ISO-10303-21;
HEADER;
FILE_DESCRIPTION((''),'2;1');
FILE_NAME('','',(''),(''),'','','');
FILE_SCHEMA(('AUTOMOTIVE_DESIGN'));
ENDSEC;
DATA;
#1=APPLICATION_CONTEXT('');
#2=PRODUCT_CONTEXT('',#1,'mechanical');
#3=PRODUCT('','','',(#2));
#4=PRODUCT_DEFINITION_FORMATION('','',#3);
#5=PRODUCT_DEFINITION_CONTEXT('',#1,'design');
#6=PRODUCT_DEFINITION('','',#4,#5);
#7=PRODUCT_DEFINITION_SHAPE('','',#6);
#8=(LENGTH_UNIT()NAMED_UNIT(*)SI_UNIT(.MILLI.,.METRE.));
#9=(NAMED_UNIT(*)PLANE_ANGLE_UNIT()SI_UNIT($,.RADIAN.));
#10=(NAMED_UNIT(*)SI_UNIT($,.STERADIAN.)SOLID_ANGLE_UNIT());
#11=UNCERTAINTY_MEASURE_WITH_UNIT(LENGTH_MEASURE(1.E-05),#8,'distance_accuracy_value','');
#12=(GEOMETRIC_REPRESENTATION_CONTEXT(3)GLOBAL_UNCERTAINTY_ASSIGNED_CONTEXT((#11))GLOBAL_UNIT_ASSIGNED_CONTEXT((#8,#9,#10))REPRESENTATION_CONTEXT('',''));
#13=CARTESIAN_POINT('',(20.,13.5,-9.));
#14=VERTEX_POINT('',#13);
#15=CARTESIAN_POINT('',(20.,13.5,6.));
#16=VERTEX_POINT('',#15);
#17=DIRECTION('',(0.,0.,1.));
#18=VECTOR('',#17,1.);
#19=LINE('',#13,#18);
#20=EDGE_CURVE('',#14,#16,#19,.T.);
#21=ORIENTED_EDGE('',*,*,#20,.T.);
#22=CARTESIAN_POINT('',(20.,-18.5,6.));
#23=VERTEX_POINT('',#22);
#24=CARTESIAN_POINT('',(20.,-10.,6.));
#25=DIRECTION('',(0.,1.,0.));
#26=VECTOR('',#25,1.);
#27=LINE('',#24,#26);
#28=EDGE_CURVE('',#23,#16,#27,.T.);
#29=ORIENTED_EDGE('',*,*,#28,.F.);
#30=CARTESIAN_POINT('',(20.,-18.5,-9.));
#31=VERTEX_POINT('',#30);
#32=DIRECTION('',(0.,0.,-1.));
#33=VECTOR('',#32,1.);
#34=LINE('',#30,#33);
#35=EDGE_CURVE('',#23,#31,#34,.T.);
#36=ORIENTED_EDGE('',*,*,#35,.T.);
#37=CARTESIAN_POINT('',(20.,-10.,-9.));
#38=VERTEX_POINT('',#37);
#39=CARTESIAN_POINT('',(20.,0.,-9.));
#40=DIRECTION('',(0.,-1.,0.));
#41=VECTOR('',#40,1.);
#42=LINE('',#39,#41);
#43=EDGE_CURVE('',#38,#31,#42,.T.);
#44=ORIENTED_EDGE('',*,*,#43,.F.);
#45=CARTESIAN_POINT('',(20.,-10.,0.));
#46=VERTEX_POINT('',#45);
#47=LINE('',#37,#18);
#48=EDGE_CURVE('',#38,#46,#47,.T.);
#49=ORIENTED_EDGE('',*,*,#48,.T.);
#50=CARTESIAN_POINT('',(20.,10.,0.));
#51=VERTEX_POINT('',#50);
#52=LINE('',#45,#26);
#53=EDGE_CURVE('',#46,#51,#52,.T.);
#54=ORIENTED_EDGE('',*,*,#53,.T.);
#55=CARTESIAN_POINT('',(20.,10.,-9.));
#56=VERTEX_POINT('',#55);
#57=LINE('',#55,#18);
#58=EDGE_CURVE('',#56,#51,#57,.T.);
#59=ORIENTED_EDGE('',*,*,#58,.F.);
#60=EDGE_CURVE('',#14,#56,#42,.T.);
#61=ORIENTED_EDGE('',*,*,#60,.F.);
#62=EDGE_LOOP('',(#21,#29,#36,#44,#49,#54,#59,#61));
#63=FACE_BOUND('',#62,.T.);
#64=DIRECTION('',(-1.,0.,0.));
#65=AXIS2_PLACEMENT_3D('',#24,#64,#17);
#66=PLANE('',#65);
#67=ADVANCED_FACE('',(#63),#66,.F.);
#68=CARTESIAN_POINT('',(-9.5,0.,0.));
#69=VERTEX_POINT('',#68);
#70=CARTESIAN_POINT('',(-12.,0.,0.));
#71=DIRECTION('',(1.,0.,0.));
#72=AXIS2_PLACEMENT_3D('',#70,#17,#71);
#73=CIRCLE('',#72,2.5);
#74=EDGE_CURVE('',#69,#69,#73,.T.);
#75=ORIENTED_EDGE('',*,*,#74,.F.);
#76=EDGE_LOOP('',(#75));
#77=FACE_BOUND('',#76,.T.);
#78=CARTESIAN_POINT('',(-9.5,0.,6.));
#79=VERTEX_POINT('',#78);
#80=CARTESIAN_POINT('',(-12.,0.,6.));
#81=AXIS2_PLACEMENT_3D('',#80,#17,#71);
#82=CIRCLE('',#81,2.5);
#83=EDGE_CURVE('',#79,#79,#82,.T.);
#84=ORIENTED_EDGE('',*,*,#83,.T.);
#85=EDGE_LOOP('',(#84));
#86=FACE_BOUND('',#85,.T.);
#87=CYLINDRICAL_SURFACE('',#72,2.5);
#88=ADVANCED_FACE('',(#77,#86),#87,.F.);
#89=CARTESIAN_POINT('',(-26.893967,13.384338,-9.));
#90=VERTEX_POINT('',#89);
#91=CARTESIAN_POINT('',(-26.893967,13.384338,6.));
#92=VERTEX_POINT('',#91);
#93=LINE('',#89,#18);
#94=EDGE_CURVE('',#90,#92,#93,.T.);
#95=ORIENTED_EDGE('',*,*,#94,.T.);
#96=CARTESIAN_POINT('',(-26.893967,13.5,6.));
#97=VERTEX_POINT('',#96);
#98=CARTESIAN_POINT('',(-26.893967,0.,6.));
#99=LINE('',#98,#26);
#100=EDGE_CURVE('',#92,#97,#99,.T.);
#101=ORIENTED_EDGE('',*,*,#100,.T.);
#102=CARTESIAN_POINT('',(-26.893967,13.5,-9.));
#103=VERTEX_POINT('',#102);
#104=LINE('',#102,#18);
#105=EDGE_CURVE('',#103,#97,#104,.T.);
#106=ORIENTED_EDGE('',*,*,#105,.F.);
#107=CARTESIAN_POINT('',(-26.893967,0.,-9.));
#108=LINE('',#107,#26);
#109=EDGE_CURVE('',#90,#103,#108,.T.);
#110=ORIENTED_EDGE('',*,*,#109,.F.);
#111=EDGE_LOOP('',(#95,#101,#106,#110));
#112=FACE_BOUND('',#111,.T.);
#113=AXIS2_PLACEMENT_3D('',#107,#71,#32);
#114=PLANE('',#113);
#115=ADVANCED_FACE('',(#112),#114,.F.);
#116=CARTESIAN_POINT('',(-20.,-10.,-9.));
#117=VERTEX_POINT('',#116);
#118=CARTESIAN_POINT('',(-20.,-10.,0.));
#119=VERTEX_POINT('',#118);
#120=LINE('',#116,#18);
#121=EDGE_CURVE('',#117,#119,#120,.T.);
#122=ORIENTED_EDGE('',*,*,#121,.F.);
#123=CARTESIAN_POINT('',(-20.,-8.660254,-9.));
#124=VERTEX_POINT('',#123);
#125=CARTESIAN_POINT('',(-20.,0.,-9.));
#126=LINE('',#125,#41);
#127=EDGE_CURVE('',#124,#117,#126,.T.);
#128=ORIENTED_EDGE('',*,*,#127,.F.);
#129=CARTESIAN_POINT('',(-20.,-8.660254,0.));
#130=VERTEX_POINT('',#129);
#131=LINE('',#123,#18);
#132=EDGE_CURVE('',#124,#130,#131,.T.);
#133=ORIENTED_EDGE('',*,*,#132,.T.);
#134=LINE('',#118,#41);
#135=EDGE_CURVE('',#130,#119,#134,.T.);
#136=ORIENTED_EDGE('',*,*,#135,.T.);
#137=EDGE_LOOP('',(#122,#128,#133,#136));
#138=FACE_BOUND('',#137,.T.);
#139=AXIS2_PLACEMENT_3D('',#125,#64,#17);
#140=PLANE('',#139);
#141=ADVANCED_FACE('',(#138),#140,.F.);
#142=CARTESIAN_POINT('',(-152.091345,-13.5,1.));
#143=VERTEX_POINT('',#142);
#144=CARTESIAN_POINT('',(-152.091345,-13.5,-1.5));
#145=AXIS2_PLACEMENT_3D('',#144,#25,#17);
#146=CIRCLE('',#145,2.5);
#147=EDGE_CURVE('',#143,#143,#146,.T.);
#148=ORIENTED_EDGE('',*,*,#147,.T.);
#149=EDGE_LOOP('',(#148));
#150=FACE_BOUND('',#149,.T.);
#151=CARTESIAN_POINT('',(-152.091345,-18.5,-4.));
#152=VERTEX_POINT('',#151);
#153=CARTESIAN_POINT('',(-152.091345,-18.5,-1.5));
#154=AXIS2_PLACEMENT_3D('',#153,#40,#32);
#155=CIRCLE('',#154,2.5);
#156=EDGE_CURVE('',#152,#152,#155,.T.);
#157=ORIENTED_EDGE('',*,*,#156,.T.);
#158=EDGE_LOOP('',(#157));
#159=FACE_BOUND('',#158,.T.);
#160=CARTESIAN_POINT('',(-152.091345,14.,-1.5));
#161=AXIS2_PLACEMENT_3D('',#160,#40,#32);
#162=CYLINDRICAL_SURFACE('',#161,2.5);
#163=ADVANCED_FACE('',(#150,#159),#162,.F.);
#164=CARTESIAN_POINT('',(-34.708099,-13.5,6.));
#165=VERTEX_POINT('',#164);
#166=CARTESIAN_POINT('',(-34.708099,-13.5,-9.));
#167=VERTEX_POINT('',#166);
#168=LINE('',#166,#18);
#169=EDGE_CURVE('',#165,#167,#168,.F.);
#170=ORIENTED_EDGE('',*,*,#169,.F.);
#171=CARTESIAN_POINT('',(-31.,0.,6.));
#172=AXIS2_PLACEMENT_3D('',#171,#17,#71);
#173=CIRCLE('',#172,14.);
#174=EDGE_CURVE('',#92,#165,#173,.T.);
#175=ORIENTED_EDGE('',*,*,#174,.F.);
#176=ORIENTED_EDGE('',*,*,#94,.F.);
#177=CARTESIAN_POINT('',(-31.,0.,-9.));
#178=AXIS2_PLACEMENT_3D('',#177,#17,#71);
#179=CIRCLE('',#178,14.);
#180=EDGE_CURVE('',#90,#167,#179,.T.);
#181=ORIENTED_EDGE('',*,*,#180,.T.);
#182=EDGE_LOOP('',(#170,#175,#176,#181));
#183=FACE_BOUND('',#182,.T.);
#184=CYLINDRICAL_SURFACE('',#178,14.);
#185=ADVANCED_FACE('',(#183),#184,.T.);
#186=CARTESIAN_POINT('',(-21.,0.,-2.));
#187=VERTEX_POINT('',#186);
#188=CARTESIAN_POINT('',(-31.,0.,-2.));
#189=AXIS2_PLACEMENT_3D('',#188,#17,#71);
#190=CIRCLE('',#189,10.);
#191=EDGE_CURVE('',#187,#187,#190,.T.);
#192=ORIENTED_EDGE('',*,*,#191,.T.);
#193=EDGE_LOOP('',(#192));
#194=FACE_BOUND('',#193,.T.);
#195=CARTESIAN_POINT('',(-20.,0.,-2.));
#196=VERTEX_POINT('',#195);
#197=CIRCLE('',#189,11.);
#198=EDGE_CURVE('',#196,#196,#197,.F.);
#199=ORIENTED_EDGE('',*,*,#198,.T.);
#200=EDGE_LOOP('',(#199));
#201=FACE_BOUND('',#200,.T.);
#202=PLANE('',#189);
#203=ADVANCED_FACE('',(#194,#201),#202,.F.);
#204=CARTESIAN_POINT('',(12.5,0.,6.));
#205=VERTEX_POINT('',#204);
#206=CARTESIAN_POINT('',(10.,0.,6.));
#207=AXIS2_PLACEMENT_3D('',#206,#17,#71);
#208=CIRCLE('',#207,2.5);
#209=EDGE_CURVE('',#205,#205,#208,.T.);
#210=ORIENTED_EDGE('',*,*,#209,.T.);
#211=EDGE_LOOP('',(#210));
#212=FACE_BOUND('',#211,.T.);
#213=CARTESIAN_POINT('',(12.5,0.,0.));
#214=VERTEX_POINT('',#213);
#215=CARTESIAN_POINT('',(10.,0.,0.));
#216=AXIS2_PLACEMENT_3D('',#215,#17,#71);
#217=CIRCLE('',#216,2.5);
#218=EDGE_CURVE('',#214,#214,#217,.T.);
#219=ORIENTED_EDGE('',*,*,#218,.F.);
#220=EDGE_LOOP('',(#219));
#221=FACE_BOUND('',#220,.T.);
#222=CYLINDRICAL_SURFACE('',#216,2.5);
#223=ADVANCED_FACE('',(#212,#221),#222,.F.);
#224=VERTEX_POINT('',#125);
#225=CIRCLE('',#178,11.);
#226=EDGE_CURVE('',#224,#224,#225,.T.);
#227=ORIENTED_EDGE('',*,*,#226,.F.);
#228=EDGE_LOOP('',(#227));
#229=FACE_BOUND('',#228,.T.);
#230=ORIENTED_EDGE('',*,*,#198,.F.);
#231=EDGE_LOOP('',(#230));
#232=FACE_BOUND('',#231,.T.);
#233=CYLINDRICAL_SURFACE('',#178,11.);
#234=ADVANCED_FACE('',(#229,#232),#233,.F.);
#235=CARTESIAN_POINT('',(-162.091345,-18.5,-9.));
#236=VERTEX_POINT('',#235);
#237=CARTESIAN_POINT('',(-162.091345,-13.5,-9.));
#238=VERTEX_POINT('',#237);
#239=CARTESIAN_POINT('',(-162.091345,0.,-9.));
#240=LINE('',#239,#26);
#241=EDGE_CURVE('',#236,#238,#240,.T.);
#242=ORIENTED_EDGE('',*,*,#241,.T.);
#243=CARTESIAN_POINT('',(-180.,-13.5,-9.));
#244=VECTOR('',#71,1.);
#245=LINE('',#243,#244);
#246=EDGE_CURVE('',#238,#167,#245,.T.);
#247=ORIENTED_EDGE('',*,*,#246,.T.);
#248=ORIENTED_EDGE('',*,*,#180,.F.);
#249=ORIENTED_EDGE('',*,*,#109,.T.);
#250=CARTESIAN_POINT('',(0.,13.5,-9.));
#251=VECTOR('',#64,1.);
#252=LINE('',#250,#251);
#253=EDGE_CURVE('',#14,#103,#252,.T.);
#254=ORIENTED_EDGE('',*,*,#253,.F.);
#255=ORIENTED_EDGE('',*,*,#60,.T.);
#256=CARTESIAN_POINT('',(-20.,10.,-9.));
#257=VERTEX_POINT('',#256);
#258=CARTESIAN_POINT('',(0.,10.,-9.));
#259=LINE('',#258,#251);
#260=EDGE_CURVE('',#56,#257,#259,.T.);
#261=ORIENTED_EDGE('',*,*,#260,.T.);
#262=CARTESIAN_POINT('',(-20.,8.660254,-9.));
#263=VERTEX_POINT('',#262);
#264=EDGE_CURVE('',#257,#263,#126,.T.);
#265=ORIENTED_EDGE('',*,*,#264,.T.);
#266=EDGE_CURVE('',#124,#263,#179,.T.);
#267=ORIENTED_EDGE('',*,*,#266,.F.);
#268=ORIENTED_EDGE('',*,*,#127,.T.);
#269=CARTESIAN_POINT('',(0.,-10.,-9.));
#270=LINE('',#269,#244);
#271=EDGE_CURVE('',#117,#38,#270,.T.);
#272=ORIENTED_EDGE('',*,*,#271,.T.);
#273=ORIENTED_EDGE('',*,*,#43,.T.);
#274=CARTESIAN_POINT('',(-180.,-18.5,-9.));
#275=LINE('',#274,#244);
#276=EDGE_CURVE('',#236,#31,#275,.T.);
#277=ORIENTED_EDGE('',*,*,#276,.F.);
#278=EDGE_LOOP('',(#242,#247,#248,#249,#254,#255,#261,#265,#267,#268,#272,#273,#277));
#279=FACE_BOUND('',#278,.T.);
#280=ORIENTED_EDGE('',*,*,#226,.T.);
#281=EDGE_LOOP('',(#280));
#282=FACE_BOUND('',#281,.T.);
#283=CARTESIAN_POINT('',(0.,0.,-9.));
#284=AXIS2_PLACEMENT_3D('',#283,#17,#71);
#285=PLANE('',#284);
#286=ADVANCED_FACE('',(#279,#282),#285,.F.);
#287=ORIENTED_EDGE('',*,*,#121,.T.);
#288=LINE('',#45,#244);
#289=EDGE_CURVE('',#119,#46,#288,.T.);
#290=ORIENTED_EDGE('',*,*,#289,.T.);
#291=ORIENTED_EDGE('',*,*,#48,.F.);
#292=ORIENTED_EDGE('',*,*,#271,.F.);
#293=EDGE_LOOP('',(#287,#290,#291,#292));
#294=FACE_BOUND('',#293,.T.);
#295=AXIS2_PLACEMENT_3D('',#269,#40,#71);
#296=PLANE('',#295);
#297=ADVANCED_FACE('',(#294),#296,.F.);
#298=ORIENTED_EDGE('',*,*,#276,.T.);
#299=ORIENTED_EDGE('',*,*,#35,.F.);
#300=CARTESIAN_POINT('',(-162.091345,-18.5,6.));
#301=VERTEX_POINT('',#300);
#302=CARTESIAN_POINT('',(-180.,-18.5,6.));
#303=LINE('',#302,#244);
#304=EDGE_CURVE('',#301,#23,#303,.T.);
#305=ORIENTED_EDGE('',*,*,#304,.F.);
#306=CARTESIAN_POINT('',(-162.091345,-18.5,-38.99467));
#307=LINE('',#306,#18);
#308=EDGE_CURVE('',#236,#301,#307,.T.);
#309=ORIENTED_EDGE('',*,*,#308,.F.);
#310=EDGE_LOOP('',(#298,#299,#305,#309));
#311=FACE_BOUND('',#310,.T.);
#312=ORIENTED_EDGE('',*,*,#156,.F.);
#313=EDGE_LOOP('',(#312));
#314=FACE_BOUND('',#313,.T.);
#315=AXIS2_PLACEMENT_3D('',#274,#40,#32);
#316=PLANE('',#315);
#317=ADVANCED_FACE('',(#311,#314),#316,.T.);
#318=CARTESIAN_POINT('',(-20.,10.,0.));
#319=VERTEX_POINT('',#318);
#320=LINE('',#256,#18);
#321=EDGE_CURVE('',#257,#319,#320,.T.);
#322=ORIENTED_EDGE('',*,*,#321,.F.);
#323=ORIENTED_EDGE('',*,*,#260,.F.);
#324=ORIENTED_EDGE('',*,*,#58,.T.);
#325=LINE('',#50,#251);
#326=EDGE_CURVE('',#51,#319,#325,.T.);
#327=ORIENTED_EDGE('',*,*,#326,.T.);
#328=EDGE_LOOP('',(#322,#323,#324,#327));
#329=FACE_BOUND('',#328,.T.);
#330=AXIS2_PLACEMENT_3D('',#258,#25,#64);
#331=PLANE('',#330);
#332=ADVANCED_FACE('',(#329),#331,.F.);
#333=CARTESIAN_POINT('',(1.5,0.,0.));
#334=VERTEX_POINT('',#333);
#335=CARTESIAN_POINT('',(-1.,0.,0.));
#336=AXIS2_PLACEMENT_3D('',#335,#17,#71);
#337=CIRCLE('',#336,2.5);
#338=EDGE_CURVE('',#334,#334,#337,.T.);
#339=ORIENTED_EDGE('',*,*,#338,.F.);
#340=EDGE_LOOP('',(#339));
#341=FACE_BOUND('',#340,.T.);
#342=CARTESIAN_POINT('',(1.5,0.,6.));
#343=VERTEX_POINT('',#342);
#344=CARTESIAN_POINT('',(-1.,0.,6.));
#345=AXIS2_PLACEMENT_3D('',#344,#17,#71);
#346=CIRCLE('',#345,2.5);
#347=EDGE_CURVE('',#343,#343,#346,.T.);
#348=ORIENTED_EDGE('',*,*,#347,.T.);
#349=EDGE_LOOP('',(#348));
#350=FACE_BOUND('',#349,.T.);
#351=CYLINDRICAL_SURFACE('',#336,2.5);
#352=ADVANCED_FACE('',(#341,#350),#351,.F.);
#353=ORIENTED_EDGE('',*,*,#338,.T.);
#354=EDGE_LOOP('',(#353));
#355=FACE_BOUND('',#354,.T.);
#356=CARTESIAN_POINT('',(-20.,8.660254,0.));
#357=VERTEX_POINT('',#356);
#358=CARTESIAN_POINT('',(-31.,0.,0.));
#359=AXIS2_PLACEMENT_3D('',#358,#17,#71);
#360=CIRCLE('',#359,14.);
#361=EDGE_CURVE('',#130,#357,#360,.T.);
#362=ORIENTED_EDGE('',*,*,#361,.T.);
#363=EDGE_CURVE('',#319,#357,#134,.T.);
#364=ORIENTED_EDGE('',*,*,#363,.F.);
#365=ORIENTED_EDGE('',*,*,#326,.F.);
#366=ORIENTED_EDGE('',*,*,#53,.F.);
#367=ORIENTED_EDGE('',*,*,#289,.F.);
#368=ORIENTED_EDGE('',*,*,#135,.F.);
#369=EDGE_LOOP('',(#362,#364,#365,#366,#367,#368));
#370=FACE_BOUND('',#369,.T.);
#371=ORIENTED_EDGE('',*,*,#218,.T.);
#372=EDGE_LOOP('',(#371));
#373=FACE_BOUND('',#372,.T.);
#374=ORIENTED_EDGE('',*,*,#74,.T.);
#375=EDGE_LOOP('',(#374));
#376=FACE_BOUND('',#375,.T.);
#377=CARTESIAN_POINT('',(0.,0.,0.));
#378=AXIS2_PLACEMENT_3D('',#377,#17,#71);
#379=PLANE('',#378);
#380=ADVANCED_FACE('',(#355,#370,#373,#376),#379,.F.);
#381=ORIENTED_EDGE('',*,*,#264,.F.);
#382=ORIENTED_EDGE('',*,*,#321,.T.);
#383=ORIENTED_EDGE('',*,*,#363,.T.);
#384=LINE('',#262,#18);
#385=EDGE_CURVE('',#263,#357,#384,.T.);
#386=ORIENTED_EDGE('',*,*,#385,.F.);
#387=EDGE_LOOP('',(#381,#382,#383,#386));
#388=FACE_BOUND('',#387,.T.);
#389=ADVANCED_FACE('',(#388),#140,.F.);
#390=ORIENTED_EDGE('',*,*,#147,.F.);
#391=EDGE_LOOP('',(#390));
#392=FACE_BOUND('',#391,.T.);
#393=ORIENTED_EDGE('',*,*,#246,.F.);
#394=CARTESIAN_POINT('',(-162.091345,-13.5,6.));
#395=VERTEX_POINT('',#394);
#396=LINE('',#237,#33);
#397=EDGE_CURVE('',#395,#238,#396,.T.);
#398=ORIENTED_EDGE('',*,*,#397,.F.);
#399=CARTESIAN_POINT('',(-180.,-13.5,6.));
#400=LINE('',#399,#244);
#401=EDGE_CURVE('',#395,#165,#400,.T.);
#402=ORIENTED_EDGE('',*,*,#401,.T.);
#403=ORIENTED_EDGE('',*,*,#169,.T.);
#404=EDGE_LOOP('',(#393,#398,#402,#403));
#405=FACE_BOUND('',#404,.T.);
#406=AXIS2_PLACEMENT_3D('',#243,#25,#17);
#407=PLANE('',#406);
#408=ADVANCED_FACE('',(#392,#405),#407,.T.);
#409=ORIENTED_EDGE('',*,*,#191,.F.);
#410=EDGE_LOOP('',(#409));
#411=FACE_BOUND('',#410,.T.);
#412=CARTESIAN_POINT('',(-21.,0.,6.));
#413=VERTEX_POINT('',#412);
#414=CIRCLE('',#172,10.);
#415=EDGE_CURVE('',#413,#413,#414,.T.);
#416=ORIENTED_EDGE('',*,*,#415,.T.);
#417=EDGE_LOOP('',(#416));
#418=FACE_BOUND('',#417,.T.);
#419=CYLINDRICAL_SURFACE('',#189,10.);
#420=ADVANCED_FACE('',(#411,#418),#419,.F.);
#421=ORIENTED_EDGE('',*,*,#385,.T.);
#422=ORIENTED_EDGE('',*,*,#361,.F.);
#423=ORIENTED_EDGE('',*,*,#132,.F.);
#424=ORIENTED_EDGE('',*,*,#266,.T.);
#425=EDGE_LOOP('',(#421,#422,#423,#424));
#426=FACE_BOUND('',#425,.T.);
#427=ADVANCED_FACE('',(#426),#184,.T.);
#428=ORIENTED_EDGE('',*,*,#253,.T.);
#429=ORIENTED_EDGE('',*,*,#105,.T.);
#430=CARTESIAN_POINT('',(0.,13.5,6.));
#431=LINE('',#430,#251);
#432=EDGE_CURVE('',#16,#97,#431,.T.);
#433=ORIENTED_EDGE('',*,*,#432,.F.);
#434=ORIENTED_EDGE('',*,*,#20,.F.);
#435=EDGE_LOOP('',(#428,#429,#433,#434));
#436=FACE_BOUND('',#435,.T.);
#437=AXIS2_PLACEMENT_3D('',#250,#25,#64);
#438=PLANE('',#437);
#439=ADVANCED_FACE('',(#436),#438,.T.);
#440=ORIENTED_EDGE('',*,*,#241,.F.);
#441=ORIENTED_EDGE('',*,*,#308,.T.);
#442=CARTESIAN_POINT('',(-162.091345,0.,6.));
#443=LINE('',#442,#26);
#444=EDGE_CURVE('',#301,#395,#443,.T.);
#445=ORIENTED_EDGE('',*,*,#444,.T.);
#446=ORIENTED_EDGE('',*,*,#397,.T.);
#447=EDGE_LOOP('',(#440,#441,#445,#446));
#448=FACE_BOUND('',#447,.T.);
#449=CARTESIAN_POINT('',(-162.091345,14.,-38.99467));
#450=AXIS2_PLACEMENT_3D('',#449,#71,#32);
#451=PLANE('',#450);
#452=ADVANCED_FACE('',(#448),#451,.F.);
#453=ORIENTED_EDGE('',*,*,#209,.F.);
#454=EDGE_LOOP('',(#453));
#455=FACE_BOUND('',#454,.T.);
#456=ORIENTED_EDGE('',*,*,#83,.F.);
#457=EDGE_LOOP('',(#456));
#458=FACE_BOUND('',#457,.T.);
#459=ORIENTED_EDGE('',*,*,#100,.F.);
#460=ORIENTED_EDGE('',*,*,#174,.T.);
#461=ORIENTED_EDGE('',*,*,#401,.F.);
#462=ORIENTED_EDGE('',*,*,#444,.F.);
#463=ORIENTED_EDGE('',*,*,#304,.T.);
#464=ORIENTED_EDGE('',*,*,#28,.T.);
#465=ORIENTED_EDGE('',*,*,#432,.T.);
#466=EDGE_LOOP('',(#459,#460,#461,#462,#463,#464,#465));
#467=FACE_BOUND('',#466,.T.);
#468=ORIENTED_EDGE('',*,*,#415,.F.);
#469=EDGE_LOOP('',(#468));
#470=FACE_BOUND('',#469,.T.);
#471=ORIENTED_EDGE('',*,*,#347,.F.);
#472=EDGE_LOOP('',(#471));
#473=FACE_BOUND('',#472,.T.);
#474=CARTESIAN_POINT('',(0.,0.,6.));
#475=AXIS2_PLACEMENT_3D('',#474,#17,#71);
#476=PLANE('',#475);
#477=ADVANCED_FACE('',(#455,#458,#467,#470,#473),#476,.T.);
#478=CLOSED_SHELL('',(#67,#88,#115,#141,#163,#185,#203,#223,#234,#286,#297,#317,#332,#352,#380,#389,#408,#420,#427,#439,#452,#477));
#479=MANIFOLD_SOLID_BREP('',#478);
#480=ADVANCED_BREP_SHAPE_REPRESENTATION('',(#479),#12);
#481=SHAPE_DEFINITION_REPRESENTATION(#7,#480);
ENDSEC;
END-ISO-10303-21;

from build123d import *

# Parameters (mm, degrees)
SKETCH_1_W          = 40
SKETCH_1_H          = 20
EXTRUDE_1_DEPTH     = 6
SKETCH_2_R          = 2.5
CUT_EXTRUDE_1_DEPTH = 24.151673806
EXTRUDE_START       = -15
EXTRUDE_2_OUTLINE_R = 11
EXTRUDE_2_DEPTH     = 15
EXTRUDE_START_2     = -8
SKETCH_5_R          = 11
SKETCH_5_R_2        = 10
EXTRUDE_3_DEPTH     = 8
SKETCH_10_W         = 15
SKETCH_10_H         = 5
EXTRUDE_4_DEPTH     = 200
SKETCH_11_W         = 3.09493726
SKETCH_11_H         = 3.09493726
EXTRUDE_5_DEPTH     = 15
SKETCH_18_W         = 44.754670229
SKETCH_18_H         = 64.187168005
CUT_EXTRUDE_3_DEPTH = 184.131783151
SKETCH_19_R         = 2.5
CUT_EXTRUDE_4_DEPTH = 166.562236052


# Read off the part's stored shape, not the designer's step: 凸台-拉伸2
with BuildPart() as part:
    # 草图1 → 凸台-拉伸1 (new body)
    with BuildSketch(Plane.XY):
        Rectangle(SKETCH_1_W, SKETCH_1_H)
    extrude(amount=EXTRUDE_1_DEPTH)

    # 草图2 → 切除-拉伸1 (cut, through all)
    with BuildSketch(Plane.XY.offset(6)):
        with Locations((10, 0)):
            Circle(SKETCH_2_R)
        with Locations((-1, 0)):
            Circle(SKETCH_2_R)
        with Locations((-12, 0)):
            Circle(SKETCH_2_R)
    extrude(amount=-CUT_EXTRUDE_1_DEPTH, mode=Mode.SUBTRACT)

    # 凸台-拉伸2 outline → 凸台-拉伸2 (add)
    with BuildSketch(Plane.XY.offset(6).offset(EXTRUDE_START)):
        with BuildLine():
            Line((20, 10), (20, 13.5))
            Line((20, 13.5), (-26.893967141, 13.5))
            Line((-26.893967141, 13.5), (-26.893967141, 13.384337644))
            ThreePointArc((-26.893967141, 13.384337644), (-45, 0), (-26.893967141, -13.384337644))
            Line((-26.893967141, -13.384337644), (-26.893967141, -13.5))
            Line((-26.893967141, -13.5), (20, -13.5))
            Line((20, -13.5), (20, -10))
            Line((20, -10), (-20, -10))
            Line((-20, -10), (-20, -8.660254038))
            ThreePointArc((-20, -8.660254038), (-17, 0), (-20, 8.660254038))
            Line((-20, 8.660254038), (-20, 10))
            Line((-20, 10), (20, 10))
        make_face()
        with Locations((-31, 0)):
            Circle(EXTRUDE_2_OUTLINE_R, mode=Mode.SUBTRACT)
    extrude(amount=EXTRUDE_2_DEPTH)

    # 草图5 → 凸台-拉伸3 (add)
    with BuildSketch(Plane.XY.offset(6).offset(EXTRUDE_START_2)):
        with Locations((-31, 0)):
            Circle(SKETCH_5_R)
        with Locations((-31, 0)):
            Circle(SKETCH_5_R_2, mode=Mode.SUBTRACT)
    extrude(amount=EXTRUDE_3_DEPTH)

    # 草图10 → 凸台-拉伸4 (add)
    with BuildSketch(Plane(origin=(20, 0, 0), x_dir=(0, 0, -1), z_dir=(1, 0, 0))):
        with Locations((1.5, -16)):
            Rectangle(SKETCH_10_W, SKETCH_10_H)
    extrude(amount=-EXTRUDE_4_DEPTH)

    # 草图11 → 凸台-拉伸5 (add, through all)
    with BuildSketch(Plane.XY.offset(6)):
        with Locations((-27.071814196, -13.413570993)):
            Rectangle(SKETCH_11_W, SKETCH_11_H)
    extrude(amount=-EXTRUDE_5_DEPTH)

    # 草图18 → 切除-拉伸3 (cut, through all)
    with BuildSketch(Plane.XZ.offset(18.5)):
        with Locations((-184.468679753, -6.901085589)):
            Rectangle(SKETCH_18_W, SKETCH_18_H)
    extrude(amount=-CUT_EXTRUDE_3_DEPTH, mode=Mode.SUBTRACT)

    # 草图19 → 切除-拉伸4 (cut, through all)
    with BuildSketch(Plane.XZ.offset(18.5)):
        with Locations(Location((-152.091344638, -1.5, 0), (0, 0, 270))):
            Circle(SKETCH_19_R)
    extrude(amount=-CUT_EXTRUDE_4_DEPTH, mode=Mode.SUBTRACT)


solid = part.part
